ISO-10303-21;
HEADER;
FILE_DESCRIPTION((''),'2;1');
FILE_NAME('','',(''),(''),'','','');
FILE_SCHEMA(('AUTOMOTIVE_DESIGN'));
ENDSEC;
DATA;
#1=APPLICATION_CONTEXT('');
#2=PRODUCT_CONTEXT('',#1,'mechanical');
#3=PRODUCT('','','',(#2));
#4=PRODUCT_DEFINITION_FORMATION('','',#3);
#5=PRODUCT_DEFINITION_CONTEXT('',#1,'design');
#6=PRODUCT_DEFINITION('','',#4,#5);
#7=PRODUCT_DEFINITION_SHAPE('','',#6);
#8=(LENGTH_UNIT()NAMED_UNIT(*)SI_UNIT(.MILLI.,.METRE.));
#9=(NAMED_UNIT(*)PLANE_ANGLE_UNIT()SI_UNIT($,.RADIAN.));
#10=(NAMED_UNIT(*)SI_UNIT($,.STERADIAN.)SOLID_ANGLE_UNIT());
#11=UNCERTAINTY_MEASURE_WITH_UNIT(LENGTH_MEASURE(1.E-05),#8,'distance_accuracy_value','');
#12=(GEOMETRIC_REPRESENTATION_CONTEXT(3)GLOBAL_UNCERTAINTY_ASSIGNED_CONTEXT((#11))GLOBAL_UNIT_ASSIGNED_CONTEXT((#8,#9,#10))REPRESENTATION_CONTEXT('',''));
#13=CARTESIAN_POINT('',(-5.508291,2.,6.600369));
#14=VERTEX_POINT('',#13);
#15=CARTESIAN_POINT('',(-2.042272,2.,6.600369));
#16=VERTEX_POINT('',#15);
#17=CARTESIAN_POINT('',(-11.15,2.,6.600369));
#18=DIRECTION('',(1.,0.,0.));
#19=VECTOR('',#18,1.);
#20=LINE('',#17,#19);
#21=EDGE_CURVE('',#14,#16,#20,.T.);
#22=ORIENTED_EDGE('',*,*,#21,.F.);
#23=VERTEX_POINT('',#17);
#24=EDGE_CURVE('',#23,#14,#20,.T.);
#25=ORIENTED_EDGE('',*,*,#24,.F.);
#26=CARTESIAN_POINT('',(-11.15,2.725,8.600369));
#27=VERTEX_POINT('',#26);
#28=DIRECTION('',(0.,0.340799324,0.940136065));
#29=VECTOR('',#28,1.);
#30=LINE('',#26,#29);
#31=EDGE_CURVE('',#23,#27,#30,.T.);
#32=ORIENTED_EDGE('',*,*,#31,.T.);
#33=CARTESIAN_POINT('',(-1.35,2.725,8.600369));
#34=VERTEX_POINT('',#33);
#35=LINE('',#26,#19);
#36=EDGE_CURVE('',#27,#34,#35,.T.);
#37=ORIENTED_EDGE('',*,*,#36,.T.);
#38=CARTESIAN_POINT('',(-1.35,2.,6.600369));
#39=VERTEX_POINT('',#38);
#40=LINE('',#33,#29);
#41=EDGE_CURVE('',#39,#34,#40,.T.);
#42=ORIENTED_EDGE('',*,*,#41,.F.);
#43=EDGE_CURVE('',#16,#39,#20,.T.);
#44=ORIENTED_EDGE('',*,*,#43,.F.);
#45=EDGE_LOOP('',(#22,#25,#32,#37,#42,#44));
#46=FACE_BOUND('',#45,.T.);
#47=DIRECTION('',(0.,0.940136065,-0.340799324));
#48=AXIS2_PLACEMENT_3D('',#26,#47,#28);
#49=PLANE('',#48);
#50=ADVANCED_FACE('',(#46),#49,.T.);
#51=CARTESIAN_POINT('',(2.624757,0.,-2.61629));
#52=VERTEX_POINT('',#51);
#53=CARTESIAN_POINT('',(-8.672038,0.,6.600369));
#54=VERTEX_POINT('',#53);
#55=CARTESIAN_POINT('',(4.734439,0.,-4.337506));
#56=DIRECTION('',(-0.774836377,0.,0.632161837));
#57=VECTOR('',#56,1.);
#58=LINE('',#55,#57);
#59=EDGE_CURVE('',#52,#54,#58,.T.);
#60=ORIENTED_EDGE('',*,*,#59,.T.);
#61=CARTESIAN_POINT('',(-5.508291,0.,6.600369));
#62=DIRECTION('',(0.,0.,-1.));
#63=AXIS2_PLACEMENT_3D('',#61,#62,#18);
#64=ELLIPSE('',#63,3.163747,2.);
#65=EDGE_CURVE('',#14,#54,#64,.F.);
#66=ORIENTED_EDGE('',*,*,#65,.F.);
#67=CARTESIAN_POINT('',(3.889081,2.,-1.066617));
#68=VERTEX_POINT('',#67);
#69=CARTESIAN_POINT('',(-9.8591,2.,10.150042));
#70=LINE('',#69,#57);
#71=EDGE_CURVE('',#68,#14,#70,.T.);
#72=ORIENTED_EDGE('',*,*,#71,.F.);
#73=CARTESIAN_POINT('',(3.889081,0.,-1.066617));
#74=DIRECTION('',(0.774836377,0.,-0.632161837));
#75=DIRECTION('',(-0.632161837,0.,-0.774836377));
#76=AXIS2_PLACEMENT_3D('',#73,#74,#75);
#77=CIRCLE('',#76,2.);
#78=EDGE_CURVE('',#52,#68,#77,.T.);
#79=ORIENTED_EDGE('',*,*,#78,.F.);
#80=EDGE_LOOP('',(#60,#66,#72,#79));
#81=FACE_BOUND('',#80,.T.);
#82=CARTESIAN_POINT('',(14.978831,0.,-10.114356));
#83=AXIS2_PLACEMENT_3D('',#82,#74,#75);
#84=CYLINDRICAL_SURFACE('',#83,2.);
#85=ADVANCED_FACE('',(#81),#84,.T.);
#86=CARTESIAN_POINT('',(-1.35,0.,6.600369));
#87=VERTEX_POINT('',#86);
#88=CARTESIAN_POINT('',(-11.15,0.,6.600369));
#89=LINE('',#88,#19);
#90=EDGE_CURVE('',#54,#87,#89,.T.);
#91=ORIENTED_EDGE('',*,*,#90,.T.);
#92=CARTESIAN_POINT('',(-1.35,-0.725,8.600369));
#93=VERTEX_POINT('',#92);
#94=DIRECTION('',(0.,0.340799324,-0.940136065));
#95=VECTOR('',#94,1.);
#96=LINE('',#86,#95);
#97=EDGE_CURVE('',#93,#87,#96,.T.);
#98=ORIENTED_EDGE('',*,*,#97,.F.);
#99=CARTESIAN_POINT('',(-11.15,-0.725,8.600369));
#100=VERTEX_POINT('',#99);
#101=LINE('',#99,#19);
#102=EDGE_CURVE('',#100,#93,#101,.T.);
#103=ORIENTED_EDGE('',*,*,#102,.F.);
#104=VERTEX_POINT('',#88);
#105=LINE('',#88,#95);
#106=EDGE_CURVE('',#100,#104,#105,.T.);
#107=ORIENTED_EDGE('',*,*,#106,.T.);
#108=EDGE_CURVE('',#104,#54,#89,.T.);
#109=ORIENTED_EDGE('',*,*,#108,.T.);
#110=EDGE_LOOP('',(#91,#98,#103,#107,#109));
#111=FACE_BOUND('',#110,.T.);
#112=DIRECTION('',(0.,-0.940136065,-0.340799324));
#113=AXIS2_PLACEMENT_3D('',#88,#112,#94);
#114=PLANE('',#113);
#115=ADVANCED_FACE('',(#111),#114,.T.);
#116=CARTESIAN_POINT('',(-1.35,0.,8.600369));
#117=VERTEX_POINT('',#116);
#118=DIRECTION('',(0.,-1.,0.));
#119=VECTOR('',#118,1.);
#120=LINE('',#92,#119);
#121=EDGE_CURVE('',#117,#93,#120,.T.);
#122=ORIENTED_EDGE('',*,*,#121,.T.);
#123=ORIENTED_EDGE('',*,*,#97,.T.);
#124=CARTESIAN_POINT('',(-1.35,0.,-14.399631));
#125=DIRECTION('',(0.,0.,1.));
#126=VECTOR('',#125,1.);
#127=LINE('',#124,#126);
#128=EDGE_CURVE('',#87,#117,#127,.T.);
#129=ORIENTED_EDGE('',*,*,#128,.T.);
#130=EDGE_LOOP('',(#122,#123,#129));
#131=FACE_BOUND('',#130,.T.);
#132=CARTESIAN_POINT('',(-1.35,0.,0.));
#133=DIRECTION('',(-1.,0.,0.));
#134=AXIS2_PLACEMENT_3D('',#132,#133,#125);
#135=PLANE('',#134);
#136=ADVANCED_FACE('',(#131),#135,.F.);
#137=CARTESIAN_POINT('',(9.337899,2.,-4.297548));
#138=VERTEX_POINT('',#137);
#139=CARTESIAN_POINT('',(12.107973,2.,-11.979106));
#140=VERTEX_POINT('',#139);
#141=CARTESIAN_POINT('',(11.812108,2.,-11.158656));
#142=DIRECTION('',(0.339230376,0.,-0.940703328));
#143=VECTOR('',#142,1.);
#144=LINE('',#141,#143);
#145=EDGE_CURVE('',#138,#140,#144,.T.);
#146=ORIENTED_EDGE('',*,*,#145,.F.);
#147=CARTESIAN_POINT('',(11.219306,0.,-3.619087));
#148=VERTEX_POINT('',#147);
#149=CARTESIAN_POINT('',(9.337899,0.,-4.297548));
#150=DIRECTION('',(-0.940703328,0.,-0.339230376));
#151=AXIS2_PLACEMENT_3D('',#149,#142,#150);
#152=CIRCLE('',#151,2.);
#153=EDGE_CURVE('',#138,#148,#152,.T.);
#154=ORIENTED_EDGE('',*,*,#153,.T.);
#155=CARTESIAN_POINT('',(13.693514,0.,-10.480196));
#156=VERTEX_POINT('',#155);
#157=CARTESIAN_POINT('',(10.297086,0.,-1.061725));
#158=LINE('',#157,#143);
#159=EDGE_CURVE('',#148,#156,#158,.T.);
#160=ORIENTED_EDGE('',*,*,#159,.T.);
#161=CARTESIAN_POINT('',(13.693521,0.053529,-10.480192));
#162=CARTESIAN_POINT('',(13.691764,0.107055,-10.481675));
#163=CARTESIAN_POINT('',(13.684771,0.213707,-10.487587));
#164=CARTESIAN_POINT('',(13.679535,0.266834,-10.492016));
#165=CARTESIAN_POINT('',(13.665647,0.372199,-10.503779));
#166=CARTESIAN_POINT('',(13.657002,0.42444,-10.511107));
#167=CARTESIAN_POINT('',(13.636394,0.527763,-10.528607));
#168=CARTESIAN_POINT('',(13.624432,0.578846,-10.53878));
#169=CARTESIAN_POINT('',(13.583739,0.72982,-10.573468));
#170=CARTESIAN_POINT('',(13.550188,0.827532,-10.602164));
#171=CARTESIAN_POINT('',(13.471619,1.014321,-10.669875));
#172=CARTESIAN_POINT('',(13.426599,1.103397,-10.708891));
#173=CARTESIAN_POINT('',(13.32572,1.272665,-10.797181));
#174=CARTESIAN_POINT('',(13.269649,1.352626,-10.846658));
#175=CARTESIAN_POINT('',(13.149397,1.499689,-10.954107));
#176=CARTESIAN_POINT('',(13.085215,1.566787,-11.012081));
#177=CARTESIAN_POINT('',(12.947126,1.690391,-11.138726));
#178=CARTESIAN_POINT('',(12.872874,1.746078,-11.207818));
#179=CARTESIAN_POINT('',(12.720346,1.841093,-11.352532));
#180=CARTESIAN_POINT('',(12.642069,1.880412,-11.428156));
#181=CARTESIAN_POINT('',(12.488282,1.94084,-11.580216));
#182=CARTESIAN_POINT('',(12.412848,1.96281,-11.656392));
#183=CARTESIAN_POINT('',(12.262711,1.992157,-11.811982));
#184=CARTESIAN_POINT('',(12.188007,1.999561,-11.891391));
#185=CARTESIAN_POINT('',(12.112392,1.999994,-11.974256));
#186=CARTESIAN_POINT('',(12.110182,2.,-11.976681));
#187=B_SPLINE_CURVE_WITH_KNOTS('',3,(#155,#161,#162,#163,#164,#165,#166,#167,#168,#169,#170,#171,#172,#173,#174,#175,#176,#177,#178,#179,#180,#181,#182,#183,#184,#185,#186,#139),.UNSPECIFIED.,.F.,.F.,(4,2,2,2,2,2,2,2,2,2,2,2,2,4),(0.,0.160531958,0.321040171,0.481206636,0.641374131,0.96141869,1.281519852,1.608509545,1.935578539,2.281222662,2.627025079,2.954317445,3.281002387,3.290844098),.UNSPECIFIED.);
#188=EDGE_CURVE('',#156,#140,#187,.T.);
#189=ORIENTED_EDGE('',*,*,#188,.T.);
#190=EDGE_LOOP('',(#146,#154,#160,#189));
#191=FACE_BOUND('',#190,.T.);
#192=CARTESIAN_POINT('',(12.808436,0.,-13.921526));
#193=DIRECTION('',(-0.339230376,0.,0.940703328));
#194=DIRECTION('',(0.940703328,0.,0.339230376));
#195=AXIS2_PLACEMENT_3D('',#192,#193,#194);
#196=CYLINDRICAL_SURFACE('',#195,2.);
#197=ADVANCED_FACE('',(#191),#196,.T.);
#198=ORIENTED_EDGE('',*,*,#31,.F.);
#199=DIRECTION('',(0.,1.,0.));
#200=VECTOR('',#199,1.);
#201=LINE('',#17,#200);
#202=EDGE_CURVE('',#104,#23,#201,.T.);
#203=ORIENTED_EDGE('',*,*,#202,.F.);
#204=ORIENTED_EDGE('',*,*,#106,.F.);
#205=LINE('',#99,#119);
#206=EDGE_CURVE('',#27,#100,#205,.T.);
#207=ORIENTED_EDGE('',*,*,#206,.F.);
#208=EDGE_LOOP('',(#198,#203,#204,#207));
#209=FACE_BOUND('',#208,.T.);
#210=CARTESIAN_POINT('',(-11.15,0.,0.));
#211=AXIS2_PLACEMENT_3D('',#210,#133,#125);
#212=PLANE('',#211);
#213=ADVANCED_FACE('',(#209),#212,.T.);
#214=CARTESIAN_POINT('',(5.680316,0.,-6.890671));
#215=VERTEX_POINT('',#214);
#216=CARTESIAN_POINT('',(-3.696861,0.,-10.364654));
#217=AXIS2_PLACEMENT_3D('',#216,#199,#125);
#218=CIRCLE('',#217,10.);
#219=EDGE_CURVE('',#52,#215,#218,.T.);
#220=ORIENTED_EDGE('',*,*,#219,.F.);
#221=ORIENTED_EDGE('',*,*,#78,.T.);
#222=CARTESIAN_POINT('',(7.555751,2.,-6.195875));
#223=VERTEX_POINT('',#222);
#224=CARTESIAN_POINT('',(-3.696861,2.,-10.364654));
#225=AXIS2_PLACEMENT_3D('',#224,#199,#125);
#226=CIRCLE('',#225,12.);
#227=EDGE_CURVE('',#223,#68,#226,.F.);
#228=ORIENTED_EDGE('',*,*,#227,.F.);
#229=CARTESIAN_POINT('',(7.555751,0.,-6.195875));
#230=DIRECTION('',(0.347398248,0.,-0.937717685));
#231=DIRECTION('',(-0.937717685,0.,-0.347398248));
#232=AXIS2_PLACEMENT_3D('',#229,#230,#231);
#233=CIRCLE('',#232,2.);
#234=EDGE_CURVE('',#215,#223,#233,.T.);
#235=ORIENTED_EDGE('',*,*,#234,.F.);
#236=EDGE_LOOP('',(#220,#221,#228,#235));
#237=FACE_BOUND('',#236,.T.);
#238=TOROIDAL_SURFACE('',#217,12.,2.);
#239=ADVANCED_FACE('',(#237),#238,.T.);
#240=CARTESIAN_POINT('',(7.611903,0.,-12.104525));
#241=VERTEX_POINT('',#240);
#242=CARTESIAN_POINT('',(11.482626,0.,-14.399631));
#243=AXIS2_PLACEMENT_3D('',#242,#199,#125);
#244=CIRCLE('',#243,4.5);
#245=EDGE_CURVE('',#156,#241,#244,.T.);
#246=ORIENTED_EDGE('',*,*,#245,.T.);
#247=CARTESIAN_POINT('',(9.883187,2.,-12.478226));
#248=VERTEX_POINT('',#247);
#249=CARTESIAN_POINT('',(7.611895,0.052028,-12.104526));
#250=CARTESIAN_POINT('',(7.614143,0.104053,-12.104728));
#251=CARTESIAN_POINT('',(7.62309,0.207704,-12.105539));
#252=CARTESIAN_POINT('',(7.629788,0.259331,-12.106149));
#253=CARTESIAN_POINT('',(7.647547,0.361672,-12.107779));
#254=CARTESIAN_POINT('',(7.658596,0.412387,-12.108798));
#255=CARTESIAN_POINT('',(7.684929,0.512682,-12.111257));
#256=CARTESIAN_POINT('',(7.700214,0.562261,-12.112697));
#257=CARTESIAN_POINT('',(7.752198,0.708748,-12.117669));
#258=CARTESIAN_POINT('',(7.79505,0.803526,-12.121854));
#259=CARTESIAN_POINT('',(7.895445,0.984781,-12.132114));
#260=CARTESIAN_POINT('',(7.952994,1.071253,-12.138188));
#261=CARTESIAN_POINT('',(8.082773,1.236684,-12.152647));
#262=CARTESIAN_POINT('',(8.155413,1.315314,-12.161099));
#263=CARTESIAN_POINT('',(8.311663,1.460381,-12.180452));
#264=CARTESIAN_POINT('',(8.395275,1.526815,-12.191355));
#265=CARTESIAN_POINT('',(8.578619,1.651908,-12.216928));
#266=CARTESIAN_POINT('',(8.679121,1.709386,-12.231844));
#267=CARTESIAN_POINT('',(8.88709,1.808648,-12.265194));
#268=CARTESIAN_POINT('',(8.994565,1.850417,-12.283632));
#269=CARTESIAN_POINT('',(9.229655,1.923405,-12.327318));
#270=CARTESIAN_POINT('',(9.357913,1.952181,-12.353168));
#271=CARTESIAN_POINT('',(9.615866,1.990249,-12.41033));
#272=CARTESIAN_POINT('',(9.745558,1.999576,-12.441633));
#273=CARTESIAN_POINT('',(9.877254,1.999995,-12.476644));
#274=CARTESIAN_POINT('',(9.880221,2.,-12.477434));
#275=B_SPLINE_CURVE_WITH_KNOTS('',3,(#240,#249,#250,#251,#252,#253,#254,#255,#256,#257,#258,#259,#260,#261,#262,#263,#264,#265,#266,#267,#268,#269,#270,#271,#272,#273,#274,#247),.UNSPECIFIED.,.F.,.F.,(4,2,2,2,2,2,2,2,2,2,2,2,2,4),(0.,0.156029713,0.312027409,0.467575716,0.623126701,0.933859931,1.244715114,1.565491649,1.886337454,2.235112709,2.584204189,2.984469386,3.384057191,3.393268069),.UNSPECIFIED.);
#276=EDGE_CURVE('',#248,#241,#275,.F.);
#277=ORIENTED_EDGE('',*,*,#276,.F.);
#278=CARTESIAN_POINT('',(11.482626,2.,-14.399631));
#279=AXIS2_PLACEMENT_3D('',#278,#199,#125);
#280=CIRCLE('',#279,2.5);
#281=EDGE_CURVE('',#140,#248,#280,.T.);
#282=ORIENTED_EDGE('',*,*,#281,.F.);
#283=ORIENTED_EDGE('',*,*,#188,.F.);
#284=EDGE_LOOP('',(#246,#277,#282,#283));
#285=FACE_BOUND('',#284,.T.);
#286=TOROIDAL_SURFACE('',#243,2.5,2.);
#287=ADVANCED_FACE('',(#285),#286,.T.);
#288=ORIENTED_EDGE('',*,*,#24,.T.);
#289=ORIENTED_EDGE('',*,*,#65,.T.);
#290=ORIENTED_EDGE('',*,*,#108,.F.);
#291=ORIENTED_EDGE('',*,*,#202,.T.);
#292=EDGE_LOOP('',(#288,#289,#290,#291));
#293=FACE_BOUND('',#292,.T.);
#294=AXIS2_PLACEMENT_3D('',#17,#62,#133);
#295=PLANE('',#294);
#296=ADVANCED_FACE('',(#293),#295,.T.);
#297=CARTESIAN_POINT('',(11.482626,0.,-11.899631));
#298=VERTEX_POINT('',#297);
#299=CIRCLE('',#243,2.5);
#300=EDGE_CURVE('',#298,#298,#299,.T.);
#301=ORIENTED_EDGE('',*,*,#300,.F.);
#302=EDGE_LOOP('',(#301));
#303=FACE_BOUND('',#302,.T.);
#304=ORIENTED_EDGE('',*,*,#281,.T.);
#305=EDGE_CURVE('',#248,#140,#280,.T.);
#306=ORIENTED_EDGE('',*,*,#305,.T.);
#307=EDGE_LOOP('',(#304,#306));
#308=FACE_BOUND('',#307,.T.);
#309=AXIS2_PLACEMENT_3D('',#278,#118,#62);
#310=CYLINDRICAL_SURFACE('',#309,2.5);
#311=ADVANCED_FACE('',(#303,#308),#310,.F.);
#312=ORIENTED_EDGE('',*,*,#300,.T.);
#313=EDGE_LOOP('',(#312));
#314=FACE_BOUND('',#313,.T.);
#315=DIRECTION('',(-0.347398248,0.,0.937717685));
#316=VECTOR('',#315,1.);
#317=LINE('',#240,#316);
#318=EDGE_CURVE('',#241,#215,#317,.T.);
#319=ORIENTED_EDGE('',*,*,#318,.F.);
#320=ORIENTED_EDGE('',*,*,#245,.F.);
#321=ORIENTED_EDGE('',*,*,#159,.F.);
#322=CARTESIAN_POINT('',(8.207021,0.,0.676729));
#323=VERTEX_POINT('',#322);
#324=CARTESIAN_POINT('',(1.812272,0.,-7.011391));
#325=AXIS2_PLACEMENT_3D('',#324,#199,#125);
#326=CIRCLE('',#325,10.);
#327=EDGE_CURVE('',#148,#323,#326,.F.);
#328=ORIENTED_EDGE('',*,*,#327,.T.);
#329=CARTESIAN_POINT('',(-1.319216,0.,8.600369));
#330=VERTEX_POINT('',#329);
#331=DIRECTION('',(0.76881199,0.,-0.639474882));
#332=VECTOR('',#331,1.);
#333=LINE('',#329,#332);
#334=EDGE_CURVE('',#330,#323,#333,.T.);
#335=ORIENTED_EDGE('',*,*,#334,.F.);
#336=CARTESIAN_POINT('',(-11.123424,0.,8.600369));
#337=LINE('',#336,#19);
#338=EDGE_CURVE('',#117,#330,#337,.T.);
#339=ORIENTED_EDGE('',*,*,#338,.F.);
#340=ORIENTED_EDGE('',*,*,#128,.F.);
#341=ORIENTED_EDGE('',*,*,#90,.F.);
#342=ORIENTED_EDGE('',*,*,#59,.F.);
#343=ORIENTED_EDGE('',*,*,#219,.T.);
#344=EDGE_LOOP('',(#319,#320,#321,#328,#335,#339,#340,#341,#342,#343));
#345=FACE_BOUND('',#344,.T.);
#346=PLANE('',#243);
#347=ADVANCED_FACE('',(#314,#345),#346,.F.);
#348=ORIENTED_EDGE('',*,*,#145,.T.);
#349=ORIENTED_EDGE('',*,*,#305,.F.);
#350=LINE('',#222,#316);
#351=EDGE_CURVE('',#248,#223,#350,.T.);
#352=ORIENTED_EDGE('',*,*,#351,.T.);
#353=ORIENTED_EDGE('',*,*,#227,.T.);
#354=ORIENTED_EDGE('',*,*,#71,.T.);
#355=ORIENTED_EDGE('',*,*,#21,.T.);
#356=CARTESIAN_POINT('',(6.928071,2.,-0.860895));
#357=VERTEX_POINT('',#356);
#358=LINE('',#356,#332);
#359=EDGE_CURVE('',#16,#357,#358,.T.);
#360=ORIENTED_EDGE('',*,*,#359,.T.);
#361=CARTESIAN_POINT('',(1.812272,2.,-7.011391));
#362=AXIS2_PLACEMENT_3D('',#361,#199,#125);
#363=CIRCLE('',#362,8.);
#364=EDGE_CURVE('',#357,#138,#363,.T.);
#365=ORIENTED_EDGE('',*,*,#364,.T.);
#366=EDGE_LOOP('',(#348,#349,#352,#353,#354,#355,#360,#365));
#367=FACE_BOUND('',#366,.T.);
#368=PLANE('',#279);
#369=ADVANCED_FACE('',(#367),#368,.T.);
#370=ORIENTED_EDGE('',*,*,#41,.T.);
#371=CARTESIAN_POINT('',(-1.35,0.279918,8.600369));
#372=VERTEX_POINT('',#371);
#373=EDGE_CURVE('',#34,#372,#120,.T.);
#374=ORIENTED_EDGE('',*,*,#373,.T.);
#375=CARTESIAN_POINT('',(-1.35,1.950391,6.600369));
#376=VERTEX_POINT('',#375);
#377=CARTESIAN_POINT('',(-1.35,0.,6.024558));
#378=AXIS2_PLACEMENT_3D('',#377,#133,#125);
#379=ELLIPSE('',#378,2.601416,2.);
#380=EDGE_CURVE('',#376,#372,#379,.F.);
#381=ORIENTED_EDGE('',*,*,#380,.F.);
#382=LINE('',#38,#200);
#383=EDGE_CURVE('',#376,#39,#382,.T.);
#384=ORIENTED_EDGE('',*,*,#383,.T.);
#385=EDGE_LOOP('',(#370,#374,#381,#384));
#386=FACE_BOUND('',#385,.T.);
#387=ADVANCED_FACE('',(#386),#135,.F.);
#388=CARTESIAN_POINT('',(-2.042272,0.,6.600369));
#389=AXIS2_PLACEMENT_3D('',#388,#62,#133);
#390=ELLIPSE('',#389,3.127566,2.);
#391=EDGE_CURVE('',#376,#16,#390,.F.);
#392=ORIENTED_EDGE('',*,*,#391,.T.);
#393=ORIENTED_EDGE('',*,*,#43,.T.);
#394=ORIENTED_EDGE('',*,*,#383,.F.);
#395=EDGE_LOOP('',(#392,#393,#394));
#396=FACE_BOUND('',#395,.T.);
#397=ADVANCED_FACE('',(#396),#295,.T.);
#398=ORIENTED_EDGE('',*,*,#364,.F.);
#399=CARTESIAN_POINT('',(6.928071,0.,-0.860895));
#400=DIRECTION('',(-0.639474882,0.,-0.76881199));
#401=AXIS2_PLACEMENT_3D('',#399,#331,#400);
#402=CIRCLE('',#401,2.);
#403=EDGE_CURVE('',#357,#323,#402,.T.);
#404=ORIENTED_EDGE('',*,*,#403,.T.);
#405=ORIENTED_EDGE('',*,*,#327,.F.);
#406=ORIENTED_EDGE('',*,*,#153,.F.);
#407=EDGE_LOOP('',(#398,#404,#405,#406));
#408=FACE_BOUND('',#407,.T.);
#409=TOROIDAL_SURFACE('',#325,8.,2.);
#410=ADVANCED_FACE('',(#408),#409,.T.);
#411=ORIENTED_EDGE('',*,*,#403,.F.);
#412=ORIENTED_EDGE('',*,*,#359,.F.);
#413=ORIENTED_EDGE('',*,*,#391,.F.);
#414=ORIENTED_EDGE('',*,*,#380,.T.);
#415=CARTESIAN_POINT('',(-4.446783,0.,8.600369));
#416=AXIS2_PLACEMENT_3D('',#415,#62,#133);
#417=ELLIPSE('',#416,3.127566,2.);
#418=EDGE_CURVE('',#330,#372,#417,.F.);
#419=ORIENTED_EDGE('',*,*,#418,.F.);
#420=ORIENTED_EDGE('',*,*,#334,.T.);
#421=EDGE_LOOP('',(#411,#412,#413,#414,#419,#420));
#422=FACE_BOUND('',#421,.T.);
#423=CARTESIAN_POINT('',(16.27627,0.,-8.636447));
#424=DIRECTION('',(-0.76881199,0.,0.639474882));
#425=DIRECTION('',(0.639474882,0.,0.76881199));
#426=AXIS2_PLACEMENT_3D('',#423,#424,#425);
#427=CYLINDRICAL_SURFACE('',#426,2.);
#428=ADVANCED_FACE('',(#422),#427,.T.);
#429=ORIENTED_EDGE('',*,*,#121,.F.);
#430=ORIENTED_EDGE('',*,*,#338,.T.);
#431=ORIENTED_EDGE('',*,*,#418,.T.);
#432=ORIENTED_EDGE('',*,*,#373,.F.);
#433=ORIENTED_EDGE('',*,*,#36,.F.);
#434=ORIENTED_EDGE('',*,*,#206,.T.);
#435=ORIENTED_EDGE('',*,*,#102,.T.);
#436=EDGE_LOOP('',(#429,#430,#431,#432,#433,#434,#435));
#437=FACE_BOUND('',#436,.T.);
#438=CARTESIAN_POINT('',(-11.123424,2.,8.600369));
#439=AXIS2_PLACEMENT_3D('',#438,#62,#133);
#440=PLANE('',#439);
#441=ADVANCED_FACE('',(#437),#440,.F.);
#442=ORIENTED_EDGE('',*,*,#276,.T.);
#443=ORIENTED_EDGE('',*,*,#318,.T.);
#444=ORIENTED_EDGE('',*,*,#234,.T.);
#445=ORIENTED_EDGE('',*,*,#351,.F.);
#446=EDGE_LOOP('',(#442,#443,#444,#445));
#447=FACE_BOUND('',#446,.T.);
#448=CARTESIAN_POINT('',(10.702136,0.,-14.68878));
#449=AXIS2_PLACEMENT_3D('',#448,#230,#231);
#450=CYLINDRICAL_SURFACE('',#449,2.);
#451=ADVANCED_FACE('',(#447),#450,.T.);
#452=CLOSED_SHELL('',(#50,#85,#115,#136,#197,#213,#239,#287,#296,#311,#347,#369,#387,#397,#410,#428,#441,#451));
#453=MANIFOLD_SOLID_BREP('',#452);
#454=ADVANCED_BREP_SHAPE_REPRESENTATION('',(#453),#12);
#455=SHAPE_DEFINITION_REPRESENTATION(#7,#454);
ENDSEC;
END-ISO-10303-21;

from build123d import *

# Parameters (mm, degrees)
SKETCH1_R                = 2.5000000000000004
BOSS_EXTRUDE1_DEPTH      = 2
FILLET1_R                = 10
FILLET2_R                = 10
FILLET5_R                = 2
FILLET6_R                = 2
BOSS_EXTRUDE2_DEPTH      = 5.3
BOSS_EXTRUDE2_DEPTH_BACK = 4.5


with BuildPart() as part:
    # Sketch1 → Boss-Extrude1 (new body)
    with BuildSketch(Plane(origin=(0, 0, 0), x_dir=(1, 0, 0), z_dir=(0, 1, 0))):
        with BuildLine():
            Line((4.734439187943633, 4.337505524576787), (-11.123424173439652, -8.60036927980545))
            Line((-11.123424173439652, -8.60036927980545), (-1.3192163601402593, -8.60036927980545))
            Line((-1.3192163601402593, -8.60036927980545), (10.29708605182919, 1.0617245936219641))
            Line((10.29708605182919, 1.0617245936219641), (13.693514413313048, 10.480195617492226))
            ThreePointArc((13.693514413313048, 10.480195617492226), (12.643820805599, 18.747230765158918), (7.611903426882685, 12.104525420451473))
            Line((7.611903426882685, 12.104525420451473), (4.734439187943633, 4.337505524576787))
        make_face()
        with Locations(Location((11.482625796556237, 14.39963072019455, 0), (0, 0, 270))):
            Circle(SKETCH1_R, mode=Mode.SUBTRACT)
    extrude(amount=BOSS_EXTRUDE1_DEPTH)

    # Fillet1
    fillet1_edges = [part.edges().sort_by_distance(p)[0] for p in [
        (10.29708605182919, 1, -1.0617245936219641),
    ]]
    fillet(fillet1_edges, radius=FILLET1_R)

    # Fillet2
    fillet2_edges = [part.edges().sort_by_distance(p)[0] for p in [
        (4.734439187943633, 1, -4.337505524576787),
    ]]
    fillet(fillet2_edges, radius=FILLET2_R)

    # Fillet5
    fillet5_edges = [part.edges().sort_by_distance(p)[0] for p in [
        (6.6461096923169105, 2, -9.49759844281185),
        (4.438286722207531, 2, -4.549211293465088),
        (12.456410034317898, 2, -7.049641368446211),
        (9.999920903343424, 2, -1.270100820961935),
        (-4.249333346620522, 2, 2.9920395518602865),
        (3.4439024153195033, 2, 4.638549149214148),
    ]]
    fillet(fillet5_edges, radius=FILLET5_R - 0.0001)  # a hair under: the kernel refuses the full size

    # Fillet6
    fillet6_edges = [part.edges().sort_by_distance(p)[0] for p in [
        (12.744313913733471, 2, -18.719137994754206),
    ]]
    fillet(fillet6_edges, radius=FILLET6_R - 0.0001)  # a hair under: the kernel refuses the full size

    # Sketch6 → Boss-Extrude2 (add, two sides: drawn at the far end of the back side and taken through both)
    with BuildSketch(Plane(origin=(-6.6499999999999995, 0, 0), x_dir=(0, 0, -1), z_dir=(1, 0, 0)).offset(-BOSS_EXTRUDE2_DEPTH_BACK)):
        Polygon((-8.60036927980545, 2.7250000000000005), (-6.60036927980545, 2), (-6.60036927980545, 0), (-8.60036927980545, -0.7249999999999998), align=None)
    extrude(amount=BOSS_EXTRUDE2_DEPTH + BOSS_EXTRUDE2_DEPTH_BACK)


solid = part.part
